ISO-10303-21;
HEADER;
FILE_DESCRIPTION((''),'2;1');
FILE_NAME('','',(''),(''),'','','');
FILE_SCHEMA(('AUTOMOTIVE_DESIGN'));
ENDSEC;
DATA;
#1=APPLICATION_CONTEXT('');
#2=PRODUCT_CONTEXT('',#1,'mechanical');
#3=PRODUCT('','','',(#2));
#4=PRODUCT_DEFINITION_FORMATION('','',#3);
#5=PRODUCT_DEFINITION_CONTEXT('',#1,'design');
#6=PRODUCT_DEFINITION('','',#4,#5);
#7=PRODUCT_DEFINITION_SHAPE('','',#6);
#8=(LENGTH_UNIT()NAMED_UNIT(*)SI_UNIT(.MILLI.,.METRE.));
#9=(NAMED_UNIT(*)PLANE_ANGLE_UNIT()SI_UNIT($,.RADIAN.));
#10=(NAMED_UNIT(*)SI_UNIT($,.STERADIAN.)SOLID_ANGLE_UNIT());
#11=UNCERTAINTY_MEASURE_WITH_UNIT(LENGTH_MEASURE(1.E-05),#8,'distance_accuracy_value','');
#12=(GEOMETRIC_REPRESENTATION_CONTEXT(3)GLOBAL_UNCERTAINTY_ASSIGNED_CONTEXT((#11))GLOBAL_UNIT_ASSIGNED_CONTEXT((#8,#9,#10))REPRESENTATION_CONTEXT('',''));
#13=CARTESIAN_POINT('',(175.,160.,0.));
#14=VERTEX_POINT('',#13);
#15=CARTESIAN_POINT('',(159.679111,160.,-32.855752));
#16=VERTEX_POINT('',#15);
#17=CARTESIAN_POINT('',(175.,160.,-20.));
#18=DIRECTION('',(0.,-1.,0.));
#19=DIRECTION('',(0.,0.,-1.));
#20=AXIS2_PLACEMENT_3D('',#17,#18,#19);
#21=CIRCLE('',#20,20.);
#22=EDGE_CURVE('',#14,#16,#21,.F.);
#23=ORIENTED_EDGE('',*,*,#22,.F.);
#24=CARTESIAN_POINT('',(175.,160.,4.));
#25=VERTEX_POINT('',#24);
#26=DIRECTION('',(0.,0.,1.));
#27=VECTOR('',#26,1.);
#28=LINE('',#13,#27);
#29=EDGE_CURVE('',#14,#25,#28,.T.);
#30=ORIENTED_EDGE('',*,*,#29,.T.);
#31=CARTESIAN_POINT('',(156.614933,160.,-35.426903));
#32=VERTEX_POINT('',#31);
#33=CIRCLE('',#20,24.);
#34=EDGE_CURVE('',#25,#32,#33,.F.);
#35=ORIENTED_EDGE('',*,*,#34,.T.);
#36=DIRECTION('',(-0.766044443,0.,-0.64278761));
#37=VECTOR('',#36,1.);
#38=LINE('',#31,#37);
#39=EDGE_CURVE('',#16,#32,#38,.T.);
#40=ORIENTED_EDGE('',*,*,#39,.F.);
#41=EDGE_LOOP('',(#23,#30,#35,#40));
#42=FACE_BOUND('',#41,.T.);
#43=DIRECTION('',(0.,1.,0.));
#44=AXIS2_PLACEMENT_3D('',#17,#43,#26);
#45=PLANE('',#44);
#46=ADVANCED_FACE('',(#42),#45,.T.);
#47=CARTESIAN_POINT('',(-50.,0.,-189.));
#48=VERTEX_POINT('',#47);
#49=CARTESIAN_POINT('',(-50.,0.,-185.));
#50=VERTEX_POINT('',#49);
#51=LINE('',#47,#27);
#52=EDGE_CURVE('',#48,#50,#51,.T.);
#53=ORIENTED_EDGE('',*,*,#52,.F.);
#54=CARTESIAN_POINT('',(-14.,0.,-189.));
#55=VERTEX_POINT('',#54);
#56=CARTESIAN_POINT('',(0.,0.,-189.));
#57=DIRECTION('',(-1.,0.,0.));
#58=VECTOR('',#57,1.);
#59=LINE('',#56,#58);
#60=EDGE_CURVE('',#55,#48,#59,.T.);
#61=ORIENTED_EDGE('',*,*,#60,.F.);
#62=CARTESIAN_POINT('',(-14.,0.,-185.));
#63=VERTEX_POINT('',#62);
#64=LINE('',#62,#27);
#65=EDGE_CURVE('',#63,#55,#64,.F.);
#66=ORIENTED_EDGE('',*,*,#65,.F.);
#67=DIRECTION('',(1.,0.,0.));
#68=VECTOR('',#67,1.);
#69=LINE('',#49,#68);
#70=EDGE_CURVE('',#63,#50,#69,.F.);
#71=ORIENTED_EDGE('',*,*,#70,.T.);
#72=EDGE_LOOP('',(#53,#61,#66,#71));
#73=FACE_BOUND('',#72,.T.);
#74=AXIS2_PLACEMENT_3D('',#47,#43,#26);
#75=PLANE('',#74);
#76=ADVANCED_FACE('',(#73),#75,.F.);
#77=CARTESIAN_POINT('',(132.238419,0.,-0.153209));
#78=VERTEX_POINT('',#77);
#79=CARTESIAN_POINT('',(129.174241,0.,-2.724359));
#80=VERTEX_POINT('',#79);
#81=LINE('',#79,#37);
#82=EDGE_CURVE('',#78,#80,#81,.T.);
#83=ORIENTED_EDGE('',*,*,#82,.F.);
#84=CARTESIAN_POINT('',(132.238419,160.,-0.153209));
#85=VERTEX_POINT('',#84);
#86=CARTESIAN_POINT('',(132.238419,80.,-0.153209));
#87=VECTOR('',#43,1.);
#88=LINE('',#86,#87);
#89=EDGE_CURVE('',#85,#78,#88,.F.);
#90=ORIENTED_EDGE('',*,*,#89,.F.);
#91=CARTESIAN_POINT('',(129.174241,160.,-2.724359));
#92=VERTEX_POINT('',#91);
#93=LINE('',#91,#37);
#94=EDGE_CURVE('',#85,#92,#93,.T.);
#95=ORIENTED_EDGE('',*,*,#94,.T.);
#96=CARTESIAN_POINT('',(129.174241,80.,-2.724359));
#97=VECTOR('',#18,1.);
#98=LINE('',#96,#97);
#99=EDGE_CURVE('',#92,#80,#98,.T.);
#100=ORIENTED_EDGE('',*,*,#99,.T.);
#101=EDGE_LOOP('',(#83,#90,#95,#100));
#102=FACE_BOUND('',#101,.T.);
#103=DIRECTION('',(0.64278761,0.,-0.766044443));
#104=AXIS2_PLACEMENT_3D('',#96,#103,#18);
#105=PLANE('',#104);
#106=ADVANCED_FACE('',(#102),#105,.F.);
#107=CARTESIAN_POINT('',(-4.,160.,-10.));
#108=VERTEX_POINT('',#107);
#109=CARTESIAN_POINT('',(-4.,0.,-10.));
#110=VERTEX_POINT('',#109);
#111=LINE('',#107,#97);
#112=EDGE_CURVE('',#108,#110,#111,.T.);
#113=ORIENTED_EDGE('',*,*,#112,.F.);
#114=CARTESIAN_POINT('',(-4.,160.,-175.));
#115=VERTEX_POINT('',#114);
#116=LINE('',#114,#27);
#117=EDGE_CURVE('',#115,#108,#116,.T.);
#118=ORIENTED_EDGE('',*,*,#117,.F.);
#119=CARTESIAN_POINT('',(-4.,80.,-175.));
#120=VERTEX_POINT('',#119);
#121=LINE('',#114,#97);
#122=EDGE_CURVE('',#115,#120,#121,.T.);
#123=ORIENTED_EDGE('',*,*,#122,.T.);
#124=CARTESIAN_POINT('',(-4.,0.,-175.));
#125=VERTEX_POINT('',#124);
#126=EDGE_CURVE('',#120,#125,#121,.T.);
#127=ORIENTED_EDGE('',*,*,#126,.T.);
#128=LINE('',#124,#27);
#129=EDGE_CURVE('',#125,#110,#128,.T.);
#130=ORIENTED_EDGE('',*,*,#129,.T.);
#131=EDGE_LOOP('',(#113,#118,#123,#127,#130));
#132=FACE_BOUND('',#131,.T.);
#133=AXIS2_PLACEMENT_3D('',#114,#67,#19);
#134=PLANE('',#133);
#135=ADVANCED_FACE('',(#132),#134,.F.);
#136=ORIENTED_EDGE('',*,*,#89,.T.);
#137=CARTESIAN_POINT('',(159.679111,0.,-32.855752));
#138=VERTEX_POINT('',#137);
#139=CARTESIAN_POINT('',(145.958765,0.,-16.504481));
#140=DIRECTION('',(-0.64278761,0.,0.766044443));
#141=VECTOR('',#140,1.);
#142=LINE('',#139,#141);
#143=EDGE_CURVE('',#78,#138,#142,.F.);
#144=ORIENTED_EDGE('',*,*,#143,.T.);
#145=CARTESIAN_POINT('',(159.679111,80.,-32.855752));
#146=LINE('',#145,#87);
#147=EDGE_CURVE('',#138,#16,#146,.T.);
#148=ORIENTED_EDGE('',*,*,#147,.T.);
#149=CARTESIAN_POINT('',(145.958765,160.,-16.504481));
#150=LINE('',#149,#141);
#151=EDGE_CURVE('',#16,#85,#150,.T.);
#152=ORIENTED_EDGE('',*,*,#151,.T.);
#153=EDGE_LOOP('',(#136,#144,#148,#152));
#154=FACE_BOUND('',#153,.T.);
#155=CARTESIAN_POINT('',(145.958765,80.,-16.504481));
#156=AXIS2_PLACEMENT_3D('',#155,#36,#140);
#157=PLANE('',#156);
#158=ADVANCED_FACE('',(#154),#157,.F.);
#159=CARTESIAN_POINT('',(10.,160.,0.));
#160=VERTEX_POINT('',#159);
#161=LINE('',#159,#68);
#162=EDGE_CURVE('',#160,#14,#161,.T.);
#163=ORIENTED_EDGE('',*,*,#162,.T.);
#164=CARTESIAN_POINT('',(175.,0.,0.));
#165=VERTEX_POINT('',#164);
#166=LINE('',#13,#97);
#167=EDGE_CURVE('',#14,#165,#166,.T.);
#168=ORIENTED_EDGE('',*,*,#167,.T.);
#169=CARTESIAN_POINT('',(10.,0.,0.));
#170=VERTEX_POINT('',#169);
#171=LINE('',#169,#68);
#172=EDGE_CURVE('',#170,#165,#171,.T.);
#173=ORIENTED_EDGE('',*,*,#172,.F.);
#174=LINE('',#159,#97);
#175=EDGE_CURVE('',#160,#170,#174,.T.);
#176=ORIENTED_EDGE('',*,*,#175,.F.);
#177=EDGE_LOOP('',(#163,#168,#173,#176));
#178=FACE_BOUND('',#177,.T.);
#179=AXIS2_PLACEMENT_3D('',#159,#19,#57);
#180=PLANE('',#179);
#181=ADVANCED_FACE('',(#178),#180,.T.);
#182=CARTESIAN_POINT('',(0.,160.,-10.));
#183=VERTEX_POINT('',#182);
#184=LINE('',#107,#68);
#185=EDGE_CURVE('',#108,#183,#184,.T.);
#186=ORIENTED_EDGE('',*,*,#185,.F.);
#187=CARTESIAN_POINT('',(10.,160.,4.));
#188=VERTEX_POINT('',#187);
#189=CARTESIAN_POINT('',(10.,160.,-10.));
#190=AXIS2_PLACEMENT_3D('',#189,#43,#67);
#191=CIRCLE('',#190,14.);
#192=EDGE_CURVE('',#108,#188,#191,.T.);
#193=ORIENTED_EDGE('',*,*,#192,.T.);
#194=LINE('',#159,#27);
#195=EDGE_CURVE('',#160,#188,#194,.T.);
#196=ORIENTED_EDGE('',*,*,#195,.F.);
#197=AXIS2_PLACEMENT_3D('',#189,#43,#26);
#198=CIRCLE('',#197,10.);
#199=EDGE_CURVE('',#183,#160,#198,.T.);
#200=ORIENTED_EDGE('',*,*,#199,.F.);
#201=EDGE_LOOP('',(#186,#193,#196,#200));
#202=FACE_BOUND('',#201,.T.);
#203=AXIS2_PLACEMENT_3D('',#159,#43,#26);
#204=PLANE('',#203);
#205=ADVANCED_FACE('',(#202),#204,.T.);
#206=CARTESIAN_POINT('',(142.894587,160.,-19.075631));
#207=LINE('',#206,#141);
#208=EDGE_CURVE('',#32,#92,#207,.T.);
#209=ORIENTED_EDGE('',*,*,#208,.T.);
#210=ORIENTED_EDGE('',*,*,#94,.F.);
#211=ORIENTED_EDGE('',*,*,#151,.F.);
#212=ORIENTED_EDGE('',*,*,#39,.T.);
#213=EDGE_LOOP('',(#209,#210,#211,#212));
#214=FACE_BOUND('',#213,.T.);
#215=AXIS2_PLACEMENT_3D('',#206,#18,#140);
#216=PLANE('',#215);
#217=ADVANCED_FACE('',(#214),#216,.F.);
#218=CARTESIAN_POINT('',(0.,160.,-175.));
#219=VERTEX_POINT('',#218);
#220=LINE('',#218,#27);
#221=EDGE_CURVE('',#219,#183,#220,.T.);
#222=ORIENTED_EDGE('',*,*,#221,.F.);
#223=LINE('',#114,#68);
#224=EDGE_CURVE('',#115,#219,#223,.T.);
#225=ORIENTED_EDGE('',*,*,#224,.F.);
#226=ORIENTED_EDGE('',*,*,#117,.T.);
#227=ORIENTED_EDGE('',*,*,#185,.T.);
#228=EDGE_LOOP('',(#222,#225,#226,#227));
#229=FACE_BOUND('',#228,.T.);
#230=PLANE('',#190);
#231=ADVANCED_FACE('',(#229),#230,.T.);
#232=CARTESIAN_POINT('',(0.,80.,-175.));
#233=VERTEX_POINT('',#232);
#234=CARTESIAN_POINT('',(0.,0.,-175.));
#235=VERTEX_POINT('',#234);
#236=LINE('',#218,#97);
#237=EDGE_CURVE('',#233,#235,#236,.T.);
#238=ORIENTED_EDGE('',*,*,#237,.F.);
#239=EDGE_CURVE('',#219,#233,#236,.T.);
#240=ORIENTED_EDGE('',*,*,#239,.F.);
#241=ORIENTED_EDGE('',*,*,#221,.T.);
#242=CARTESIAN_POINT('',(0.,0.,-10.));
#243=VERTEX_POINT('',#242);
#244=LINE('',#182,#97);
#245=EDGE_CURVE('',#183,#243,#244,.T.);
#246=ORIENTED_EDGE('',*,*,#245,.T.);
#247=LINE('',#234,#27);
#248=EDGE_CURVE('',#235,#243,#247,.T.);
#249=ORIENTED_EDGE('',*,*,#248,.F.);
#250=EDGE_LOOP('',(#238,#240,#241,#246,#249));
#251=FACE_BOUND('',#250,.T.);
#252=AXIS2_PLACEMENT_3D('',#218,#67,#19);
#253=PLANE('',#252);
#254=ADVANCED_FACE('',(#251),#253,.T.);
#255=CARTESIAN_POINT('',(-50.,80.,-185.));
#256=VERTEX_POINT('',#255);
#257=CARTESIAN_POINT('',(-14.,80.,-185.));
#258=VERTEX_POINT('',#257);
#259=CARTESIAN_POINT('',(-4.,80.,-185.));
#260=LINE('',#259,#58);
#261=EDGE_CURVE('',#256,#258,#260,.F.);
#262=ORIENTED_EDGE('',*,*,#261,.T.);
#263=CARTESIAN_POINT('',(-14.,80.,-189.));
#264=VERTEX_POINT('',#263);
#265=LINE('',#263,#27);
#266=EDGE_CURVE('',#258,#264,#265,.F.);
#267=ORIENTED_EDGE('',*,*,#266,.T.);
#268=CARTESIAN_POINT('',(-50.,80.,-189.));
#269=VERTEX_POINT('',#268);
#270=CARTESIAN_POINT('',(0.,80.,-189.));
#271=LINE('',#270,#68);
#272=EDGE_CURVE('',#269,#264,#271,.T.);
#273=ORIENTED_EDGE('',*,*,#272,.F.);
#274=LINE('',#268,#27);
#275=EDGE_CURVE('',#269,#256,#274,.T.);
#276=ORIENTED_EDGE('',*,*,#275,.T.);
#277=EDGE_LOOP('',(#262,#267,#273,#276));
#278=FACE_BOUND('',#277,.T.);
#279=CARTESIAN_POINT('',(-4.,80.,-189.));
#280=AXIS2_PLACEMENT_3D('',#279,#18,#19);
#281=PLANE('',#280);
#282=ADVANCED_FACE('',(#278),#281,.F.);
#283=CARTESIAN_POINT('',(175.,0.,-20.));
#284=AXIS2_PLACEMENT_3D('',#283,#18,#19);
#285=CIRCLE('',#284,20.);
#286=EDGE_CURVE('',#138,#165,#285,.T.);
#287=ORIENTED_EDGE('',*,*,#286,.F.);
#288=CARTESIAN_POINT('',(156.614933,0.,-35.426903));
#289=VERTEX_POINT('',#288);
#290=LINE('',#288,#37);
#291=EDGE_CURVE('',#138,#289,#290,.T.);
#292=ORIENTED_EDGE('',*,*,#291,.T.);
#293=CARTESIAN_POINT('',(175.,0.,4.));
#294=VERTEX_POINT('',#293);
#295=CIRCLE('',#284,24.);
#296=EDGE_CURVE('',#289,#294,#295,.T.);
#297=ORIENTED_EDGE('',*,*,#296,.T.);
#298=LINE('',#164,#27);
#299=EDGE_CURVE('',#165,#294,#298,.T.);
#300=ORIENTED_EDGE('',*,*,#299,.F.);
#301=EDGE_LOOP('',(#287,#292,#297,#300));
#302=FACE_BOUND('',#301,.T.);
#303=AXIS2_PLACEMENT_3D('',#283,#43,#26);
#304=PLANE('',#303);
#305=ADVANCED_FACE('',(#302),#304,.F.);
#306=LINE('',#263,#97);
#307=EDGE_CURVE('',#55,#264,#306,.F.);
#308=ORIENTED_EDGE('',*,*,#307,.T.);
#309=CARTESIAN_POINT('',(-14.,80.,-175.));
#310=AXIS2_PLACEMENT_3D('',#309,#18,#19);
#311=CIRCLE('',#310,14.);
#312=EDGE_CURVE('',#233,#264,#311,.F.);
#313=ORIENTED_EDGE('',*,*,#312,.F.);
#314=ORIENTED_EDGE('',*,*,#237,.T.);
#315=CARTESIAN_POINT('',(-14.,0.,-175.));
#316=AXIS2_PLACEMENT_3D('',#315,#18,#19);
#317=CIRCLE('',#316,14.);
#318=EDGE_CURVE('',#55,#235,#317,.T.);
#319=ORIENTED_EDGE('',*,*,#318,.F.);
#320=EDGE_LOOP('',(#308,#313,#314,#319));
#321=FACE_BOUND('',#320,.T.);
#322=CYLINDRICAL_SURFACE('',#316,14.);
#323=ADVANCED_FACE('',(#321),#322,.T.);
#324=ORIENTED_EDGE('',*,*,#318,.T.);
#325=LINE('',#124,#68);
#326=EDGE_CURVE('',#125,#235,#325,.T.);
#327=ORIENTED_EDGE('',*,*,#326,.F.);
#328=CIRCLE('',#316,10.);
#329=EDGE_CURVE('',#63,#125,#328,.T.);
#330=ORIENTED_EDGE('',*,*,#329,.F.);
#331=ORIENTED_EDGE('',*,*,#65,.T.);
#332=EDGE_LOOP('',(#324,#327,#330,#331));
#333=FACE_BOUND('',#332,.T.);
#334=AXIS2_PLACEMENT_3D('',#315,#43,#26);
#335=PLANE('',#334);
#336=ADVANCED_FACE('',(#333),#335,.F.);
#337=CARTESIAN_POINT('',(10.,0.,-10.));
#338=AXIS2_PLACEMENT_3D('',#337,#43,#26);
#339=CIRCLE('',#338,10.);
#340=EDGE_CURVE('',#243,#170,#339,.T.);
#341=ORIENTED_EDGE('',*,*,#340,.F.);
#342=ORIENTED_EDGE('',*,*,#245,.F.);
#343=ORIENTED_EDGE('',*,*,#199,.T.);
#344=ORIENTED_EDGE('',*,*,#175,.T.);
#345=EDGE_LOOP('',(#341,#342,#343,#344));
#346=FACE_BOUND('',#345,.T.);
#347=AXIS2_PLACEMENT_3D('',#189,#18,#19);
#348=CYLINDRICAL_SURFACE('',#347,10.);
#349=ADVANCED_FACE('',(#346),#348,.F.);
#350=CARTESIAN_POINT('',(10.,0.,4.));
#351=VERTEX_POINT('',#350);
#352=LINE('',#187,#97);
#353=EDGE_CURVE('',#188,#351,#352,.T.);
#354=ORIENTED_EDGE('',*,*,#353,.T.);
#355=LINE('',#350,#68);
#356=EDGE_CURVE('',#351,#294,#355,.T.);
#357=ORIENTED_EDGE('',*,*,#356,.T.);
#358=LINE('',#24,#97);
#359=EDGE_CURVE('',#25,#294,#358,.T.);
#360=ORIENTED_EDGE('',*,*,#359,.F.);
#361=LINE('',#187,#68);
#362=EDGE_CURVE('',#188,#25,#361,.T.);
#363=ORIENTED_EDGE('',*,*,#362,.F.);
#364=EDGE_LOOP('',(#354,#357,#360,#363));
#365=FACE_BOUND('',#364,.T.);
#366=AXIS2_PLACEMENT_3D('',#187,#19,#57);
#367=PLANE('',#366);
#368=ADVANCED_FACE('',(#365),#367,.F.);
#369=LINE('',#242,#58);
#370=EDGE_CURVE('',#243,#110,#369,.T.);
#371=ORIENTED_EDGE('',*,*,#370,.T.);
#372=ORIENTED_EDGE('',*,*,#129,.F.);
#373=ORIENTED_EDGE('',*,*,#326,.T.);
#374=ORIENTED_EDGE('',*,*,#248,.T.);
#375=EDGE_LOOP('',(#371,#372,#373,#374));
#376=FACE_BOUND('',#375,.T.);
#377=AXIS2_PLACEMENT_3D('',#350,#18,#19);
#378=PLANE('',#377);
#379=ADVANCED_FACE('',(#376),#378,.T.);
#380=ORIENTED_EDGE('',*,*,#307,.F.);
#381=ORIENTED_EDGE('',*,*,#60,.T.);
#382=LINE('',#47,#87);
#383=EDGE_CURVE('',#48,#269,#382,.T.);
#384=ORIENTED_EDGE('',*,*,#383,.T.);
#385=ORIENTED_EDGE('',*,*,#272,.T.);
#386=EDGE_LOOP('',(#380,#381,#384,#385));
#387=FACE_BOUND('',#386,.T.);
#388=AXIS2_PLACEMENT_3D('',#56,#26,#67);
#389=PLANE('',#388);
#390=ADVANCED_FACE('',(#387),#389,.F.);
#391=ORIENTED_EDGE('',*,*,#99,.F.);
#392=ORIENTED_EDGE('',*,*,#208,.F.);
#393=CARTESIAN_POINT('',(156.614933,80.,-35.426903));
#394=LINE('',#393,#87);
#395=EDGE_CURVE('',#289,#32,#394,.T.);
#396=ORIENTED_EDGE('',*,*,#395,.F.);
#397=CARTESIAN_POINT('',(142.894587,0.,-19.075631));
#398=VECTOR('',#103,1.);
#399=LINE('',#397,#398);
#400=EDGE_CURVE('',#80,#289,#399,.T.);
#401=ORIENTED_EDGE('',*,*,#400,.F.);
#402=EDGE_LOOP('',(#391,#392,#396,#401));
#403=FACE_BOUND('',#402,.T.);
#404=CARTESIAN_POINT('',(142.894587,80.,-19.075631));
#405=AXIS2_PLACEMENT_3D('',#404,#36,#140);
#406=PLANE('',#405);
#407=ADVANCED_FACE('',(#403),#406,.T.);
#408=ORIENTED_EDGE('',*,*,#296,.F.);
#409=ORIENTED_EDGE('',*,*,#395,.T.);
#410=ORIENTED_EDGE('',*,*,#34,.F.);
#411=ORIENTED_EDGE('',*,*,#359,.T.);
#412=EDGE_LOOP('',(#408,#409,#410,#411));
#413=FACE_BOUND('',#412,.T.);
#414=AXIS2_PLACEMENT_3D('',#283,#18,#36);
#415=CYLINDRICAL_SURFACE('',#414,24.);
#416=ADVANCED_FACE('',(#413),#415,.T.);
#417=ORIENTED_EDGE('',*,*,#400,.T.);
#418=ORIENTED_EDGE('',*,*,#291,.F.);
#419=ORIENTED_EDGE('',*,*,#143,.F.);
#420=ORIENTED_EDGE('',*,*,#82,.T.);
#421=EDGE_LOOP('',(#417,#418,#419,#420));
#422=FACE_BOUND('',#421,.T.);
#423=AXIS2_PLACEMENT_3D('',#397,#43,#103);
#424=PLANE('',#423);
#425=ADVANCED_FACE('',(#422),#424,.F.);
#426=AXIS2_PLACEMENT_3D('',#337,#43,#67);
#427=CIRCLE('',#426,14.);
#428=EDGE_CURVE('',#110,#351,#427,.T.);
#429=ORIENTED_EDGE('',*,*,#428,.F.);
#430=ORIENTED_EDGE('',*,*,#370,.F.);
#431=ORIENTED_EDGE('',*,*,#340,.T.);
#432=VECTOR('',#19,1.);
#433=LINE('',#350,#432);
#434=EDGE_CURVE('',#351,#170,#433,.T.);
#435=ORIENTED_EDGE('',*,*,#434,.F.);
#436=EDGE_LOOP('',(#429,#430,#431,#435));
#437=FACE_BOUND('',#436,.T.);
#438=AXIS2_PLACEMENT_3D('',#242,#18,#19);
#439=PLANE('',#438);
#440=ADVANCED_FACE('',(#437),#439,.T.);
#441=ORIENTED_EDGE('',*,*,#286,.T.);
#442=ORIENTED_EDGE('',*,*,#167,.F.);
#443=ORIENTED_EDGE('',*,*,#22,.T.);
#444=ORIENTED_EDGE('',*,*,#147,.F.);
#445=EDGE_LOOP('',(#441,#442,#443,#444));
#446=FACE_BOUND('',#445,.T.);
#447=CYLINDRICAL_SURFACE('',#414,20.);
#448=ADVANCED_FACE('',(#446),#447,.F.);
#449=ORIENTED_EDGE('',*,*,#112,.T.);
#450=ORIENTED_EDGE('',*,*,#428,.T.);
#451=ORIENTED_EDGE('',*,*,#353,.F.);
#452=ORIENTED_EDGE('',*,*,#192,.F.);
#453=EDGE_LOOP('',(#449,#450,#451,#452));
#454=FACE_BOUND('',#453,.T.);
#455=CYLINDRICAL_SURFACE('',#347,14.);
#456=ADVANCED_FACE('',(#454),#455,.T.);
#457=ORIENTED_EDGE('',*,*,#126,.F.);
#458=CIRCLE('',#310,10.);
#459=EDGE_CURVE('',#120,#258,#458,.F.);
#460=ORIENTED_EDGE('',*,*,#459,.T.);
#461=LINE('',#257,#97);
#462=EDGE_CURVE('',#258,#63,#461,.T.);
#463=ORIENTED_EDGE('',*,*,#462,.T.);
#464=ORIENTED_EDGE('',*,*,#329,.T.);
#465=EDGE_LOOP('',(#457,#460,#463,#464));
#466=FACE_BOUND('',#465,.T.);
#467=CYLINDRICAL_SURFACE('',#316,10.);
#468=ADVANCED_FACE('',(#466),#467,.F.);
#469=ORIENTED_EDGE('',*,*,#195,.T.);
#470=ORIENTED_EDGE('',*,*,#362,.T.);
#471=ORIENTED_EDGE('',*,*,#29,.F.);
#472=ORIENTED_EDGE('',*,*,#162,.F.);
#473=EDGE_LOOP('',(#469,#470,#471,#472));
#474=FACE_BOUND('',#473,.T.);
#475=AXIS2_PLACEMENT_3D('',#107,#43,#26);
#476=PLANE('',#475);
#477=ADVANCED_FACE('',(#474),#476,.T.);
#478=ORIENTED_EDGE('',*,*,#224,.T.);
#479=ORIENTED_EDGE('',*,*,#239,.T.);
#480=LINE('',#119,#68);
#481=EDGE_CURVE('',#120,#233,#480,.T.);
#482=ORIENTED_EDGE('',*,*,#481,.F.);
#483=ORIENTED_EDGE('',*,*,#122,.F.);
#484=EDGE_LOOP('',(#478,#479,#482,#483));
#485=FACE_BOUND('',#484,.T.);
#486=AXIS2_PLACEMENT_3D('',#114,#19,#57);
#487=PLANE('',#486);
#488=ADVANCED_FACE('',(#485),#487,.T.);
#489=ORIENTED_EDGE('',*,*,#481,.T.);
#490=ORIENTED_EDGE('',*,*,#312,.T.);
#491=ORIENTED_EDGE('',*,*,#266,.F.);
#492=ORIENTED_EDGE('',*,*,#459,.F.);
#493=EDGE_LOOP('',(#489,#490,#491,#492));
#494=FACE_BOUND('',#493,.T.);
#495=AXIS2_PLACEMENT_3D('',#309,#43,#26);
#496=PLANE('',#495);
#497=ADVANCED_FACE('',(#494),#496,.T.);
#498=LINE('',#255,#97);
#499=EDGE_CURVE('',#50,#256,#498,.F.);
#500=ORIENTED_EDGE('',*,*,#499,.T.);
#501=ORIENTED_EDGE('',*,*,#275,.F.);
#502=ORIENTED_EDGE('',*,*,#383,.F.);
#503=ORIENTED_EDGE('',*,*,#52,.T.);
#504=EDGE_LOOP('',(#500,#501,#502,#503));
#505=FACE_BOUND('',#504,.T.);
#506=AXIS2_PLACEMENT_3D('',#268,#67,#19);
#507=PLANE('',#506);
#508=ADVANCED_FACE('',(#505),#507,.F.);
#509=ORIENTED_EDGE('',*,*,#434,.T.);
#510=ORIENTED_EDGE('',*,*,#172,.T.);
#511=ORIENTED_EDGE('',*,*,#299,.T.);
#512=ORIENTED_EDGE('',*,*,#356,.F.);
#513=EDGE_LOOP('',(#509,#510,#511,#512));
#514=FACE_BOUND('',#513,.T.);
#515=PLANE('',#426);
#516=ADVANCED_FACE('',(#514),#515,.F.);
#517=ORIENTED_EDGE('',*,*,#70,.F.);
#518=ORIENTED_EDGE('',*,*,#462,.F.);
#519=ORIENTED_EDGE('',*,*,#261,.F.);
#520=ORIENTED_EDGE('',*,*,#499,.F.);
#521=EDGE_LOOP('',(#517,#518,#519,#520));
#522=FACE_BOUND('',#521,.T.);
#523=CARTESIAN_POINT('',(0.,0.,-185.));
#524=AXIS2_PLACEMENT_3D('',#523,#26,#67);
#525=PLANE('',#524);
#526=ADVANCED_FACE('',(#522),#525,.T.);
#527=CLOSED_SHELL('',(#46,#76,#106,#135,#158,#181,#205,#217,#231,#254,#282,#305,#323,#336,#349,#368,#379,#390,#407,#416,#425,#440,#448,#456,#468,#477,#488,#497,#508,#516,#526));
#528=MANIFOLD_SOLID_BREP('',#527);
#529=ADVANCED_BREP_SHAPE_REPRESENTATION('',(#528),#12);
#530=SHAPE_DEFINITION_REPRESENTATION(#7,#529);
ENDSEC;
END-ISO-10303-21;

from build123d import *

# Parameters (mm, degrees)
BASE_FLANGE3_DEPTH = 160
EDGE_FLANGE4_DEPTH = 80
HEM1_DEPTH         = 160


# Read off the part's stored shape, not the designer's step: Hem1
# Sheet-metal steps are written as plain solids
with BuildPart() as part:
    # Sketch1 → Base-Flange3 (new body)
    with BuildSketch(Plane(origin=(0, 0, 0), x_dir=(1, 0, 0), z_dir=(0, 1, 0))):
        with BuildLine():
            Line((0, 175), (0, 10))
            ThreePointArc((0, 10), (2.928932188, 2.928932188), (10, 0))
            Line((10, 0), (175, 0))
            Line((175, 0), (175, -4))
            Line((175, -4), (10, -4))
            ThreePointArc((10, -4), (0.100505063, 0.100505063), (-4, 10))
            Line((-4, 10), (-4, 175))
            Line((-4, 175), (0, 175))
        make_face()
    extrude(amount=BASE_FLANGE3_DEPTH)

    # Edge-Flange4 section (across the edge) → Edge-Flange4 (add)
    with BuildSketch(Plane(origin=(-4, 80, -185), x_dir=(0, 0, 1), z_dir=(0, -1, 0))):
        with BuildLine():
            Line((-4, 10), (-4, 46))
            Line((-4, 46), (0, 46))
            Line((0, 46), (0, 10))
            ThreePointArc((0, 10), (2.928932188, 2.928932188), (10, 0))
            Line((10, 0), (10, -4))
            ThreePointArc((10, -4), (0.100505063, 0.100505063), (-4, 10))
        make_face()
    extrude(amount=EDGE_FLANGE4_DEPTH)

    # Hem1 outline → Hem1 (add)
    with BuildSketch(Plane(origin=(0, 0, 0), x_dir=(1, 0, 0), z_dir=(0, 1, 0))):
        with BuildLine():
            Line((129.174241339, 2.724359327), (132.238419112, 0.153208889))
            Line((132.238419112, 0.153208889), (159.679111138, 32.855752194))
            ThreePointArc((159.679111138, 32.855752194), (193.126155741, 28.452365235), (175, 0))
            Line((175, 0), (175, -4))
            ThreePointArc((175, -4), (196.751386889, 30.142838282), (156.614933365, 35.426902632))
            Line((156.614933365, 35.426902632), (129.174241339, 2.724359327))
        make_face()
    extrude(amount=HEM1_DEPTH)


solid = part.part
